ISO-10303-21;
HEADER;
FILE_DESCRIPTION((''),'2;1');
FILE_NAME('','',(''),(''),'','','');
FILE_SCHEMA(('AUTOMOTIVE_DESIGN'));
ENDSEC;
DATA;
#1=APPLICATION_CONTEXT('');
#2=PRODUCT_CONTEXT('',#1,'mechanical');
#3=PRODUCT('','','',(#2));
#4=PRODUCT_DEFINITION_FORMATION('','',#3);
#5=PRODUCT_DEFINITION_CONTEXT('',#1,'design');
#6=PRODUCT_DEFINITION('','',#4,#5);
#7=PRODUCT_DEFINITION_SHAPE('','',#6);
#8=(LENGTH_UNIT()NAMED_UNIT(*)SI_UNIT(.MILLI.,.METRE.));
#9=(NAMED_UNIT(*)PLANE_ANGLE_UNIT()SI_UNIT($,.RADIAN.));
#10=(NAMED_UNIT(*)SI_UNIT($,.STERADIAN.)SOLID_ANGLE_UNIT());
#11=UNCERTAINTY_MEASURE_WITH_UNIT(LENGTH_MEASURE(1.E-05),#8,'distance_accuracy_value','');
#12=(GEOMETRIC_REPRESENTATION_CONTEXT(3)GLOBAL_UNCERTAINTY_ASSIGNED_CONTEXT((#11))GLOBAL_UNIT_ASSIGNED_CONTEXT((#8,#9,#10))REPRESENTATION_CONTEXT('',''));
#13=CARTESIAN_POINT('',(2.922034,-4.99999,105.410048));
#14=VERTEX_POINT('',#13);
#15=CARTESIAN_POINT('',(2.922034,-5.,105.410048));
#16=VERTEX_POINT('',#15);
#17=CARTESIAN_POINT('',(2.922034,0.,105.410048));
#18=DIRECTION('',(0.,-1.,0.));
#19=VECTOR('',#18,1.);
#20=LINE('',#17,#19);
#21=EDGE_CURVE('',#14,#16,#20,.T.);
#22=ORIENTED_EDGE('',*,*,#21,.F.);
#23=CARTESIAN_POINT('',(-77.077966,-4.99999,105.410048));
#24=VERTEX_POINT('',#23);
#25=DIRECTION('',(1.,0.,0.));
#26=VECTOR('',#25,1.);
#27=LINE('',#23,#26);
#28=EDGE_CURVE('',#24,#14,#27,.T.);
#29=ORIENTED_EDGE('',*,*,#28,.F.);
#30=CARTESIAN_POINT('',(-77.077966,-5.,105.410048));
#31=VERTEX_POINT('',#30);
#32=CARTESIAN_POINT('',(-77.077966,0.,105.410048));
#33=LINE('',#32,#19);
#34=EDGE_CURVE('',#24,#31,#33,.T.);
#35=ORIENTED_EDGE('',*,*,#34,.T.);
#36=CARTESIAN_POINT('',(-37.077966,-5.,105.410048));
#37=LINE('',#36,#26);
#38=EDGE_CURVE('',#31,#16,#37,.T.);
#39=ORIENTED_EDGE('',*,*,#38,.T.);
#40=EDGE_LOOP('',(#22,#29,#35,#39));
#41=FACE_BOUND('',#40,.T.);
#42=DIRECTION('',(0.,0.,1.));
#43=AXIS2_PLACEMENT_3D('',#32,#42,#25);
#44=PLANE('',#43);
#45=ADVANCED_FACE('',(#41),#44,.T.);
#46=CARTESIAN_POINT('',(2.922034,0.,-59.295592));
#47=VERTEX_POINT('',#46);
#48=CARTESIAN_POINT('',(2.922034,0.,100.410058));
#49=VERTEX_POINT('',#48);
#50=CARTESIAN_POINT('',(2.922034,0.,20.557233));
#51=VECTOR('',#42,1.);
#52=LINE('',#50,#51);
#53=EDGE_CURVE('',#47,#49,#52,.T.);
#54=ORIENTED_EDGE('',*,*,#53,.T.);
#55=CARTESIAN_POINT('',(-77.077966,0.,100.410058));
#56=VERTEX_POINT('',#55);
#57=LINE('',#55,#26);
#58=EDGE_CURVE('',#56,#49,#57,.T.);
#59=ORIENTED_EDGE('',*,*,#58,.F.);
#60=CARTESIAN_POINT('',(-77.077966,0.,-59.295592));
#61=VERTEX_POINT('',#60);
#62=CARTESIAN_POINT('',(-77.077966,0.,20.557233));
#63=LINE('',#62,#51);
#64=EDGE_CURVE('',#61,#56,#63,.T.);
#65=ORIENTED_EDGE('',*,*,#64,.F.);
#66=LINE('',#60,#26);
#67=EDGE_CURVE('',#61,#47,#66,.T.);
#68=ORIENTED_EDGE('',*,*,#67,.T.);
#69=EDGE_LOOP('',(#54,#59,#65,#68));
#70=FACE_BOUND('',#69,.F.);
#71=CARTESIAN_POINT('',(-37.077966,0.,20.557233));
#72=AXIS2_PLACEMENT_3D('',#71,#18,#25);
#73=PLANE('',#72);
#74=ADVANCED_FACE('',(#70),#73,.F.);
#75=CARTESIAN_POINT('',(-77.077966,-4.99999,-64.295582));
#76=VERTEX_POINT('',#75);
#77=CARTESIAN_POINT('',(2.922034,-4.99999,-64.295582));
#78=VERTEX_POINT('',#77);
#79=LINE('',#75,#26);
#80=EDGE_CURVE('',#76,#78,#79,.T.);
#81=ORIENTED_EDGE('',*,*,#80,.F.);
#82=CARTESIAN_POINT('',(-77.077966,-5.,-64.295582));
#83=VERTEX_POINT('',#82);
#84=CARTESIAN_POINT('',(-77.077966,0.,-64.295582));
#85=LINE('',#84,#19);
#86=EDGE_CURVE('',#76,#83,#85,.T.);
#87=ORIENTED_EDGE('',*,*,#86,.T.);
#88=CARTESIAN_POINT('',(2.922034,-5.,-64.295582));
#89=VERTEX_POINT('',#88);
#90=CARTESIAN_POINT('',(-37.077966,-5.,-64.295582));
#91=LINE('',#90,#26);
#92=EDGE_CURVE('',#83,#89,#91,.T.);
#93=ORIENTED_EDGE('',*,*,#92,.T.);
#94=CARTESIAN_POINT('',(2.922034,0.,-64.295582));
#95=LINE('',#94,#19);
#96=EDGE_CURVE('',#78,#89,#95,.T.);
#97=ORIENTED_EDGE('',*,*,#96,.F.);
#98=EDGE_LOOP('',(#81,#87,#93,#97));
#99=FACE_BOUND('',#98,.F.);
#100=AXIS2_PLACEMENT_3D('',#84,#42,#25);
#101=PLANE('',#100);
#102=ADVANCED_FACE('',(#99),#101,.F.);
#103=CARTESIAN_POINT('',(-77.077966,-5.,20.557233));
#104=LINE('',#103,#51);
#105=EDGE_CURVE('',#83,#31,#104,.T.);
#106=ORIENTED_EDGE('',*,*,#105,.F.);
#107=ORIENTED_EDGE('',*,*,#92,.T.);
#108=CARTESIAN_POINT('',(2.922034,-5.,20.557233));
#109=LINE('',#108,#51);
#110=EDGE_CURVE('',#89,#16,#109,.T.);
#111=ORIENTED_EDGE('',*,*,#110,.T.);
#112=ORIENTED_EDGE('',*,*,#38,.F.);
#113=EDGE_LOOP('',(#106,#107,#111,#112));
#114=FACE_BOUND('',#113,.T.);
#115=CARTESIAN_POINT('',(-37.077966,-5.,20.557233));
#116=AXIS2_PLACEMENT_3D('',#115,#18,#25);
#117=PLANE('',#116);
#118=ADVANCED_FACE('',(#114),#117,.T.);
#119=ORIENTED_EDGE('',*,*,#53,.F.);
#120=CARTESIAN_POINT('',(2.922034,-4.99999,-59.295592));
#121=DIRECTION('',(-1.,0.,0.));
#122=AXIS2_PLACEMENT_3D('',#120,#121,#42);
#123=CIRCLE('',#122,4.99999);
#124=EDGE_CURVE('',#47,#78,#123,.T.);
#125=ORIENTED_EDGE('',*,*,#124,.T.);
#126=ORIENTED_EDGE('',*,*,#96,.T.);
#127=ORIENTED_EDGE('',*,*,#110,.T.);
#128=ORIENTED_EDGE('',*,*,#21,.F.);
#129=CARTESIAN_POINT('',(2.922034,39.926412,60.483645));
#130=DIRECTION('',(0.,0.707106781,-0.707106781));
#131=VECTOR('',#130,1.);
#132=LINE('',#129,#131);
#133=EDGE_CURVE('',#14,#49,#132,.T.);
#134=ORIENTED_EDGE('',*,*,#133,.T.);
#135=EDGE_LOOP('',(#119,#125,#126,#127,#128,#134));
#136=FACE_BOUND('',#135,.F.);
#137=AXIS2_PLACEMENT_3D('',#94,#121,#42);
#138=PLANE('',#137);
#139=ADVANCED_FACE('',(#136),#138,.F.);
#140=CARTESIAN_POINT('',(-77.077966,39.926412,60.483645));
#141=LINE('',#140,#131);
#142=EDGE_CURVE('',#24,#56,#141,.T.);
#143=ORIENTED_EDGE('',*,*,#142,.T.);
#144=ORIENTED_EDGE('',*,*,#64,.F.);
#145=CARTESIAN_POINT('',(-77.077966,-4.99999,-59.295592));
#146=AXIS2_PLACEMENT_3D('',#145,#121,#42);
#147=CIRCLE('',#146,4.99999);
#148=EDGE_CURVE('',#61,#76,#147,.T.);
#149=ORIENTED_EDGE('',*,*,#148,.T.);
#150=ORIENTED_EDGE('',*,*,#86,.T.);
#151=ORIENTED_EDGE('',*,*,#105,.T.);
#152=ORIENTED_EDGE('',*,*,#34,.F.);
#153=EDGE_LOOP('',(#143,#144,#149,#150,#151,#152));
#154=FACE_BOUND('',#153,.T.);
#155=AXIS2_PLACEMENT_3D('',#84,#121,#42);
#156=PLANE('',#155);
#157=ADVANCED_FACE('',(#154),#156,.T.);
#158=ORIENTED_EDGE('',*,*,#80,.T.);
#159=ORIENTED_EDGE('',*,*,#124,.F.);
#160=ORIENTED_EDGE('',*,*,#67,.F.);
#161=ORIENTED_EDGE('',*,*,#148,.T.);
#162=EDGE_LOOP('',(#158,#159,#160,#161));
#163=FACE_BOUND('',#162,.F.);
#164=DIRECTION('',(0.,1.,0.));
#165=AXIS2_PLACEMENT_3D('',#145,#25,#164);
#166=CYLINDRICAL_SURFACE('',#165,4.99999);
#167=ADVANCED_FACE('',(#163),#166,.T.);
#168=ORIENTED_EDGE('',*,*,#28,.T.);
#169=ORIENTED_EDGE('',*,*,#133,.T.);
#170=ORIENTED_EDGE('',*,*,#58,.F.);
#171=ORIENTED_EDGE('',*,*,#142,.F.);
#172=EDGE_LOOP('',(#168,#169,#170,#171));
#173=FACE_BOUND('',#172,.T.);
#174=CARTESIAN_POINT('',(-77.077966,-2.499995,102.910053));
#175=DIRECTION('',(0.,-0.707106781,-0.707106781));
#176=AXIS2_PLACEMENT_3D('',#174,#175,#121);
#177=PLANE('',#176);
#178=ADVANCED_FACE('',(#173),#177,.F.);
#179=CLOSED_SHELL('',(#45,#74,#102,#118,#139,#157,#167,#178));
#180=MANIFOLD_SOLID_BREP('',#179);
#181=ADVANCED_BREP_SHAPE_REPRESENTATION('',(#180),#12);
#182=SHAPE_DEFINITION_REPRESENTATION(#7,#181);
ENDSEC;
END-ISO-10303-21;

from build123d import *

# Parameters (mm, degrees)
F0_W     = 80
F0_H     = 169.70563
F1_DEPTH = 5
F2_SIZE  = 4.99999
F3_R     = 4.99999


# Not quite as in the source:
# - a fillet or chamfer is up to 0.001 mm smaller than in the source, because OpenCascade refuses the exact size


with BuildPart() as f1:
    # F0 (on Front) → F1 (new body)
    with BuildSketch(Plane.XZ):
        with Locations((-37.0779657288, 20.5572328247)):
            Rectangle(F0_W, F0_H)
    extrude(amount=F1_DEPTH)

    # F2 (size 5 in the source; OpenCascade refuses exactly that, so slightly less here)
    f2_edges = [f1.edges().sort_by_distance(p)[0] for p in [
        (-37.077966, 0, 105.410048),
    ]]
    chamfer(f2_edges, length=F2_SIZE)

    # F3 (radius 5 in the source; OpenCascade refuses exactly that, so slightly less here)
    f3_edges = [f1.edges().sort_by_distance(p)[0] for p in [
        (-37.077966, 0, -64.295582),
    ]]
    fillet(f3_edges, radius=F3_R)


solid = f1.part
